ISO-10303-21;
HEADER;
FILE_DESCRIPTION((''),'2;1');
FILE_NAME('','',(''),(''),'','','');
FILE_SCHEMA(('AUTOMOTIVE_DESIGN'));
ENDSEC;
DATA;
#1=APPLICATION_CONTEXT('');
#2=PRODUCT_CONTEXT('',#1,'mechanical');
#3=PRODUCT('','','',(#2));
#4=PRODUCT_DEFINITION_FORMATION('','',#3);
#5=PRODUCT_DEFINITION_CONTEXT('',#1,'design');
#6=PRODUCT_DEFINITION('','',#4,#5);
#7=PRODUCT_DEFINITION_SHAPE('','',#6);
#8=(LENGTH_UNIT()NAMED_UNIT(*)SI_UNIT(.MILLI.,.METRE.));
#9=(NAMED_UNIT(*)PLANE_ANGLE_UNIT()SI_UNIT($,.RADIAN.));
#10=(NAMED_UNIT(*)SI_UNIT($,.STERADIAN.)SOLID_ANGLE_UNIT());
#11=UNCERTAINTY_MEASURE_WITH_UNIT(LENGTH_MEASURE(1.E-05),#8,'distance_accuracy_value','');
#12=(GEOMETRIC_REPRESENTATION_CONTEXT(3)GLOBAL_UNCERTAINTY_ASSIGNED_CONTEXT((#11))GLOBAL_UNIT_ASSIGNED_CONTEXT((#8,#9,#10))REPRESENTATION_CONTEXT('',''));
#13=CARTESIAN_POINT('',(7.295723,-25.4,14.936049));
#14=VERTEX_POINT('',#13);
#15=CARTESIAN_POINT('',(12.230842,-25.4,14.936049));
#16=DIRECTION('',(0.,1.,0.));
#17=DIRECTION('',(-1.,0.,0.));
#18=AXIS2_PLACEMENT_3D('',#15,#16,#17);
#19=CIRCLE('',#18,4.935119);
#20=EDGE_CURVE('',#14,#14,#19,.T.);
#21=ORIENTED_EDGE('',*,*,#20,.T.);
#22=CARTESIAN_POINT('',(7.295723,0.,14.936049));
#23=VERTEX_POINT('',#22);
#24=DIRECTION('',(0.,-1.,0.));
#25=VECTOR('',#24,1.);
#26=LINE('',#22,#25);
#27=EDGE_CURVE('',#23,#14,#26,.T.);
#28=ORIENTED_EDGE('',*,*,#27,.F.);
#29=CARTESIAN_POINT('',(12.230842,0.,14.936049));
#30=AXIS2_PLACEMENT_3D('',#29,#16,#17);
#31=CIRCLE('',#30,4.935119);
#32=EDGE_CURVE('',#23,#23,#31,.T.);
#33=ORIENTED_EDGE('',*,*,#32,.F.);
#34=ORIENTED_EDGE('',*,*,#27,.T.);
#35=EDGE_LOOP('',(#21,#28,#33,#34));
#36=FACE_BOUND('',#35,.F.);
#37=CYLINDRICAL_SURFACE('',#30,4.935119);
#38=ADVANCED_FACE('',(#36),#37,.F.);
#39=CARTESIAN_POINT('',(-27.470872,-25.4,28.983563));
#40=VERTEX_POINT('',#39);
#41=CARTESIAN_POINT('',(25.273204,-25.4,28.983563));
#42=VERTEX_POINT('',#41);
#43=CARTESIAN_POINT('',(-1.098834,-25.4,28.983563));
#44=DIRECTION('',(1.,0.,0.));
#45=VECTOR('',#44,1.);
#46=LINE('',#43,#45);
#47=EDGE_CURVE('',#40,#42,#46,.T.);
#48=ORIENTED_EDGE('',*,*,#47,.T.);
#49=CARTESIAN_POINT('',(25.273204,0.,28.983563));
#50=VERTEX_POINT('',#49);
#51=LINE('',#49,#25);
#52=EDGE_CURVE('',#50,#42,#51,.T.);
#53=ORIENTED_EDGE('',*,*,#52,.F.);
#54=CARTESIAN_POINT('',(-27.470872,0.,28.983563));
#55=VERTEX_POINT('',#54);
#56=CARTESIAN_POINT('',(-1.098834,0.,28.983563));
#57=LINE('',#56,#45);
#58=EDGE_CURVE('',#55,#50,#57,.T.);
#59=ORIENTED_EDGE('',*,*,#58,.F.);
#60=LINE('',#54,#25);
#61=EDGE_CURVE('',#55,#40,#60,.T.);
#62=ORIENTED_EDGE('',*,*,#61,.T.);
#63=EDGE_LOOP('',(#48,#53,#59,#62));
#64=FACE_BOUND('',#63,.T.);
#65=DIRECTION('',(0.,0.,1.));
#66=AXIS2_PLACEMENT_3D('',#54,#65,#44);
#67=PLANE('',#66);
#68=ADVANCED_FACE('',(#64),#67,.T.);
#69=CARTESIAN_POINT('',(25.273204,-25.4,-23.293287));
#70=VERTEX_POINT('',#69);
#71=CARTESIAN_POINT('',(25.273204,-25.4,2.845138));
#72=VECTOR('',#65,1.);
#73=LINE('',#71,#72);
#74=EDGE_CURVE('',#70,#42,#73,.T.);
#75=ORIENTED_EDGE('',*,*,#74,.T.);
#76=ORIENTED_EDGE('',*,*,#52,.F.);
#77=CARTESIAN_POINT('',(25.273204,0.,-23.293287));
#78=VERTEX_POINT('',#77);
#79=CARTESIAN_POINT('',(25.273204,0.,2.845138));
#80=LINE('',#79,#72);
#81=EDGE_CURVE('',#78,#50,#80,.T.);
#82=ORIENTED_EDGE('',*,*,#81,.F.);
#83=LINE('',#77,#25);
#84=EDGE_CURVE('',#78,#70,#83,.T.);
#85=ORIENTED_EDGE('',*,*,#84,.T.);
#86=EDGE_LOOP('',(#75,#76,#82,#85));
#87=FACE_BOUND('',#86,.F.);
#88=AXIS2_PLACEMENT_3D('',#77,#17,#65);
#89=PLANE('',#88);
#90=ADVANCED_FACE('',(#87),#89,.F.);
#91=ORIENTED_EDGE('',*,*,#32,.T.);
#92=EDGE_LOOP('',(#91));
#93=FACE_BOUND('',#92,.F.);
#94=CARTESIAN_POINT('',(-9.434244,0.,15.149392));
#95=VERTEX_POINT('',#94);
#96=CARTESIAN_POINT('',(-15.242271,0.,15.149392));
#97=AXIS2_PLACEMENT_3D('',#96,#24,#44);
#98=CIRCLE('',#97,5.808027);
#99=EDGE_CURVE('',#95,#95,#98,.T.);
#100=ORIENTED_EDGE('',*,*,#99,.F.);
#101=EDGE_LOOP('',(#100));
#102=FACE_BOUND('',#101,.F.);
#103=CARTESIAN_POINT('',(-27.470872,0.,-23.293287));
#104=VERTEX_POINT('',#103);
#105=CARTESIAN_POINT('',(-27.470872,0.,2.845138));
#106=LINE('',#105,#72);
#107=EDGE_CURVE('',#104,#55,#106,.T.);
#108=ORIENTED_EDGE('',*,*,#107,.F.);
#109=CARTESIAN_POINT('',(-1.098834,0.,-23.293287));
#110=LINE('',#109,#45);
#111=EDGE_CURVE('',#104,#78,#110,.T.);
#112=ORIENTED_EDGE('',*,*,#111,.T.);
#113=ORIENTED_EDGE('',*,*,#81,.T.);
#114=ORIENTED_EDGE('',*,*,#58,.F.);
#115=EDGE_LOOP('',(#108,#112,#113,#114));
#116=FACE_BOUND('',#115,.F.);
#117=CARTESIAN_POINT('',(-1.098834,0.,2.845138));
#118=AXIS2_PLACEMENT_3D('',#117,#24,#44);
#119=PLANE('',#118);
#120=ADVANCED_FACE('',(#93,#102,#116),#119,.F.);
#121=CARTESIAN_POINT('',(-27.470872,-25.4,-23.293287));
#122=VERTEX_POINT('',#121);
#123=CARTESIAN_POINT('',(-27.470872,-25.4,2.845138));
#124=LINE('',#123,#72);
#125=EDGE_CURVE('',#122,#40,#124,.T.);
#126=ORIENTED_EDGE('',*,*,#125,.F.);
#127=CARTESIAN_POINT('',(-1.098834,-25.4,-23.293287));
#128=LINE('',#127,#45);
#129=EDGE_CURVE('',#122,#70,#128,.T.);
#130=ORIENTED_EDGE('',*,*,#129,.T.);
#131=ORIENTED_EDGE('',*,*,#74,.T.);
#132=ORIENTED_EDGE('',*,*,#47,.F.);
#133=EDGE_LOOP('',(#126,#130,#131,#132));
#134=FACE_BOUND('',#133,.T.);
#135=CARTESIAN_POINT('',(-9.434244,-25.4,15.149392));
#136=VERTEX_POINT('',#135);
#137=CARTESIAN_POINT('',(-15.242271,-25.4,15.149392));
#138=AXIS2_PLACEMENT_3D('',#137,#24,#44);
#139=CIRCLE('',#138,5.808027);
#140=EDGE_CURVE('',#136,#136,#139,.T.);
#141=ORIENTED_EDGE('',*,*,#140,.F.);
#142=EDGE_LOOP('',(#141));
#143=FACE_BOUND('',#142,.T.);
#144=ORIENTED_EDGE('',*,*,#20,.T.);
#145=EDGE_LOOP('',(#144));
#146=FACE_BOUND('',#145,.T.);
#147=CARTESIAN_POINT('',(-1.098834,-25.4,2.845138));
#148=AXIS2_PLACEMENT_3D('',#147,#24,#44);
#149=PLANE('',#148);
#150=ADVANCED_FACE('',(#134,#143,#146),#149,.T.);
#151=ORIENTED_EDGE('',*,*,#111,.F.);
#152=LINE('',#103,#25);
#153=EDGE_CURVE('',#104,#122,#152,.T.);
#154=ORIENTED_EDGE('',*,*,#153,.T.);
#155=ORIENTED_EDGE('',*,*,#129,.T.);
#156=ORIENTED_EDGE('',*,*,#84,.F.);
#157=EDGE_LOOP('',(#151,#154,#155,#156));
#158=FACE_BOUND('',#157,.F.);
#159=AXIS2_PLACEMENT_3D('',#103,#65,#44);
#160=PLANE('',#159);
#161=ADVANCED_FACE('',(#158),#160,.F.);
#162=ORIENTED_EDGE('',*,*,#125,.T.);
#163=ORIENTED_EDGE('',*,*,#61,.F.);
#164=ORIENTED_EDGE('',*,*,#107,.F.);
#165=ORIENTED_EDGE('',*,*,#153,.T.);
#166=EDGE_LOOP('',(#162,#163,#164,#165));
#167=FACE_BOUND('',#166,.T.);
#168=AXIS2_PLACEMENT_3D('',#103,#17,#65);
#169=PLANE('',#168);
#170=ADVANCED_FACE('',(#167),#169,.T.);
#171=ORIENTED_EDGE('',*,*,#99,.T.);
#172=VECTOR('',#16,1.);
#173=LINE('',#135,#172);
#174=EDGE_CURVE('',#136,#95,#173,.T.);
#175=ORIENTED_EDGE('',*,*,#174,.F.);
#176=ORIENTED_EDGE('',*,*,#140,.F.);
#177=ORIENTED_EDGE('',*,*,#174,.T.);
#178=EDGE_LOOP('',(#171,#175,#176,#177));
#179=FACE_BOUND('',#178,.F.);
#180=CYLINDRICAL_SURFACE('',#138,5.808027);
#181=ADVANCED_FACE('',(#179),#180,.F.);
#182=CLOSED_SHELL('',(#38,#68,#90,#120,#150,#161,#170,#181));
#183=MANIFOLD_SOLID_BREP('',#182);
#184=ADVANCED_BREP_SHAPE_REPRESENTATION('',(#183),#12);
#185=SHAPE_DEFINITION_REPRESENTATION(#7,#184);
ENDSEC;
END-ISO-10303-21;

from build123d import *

# Parameters (mm, degrees)
F0_W     = 52.7440756559
F0_H     = 52.2768497467
F1_DEPTH = 25.4
F2_R     = 4.8102139617
F3_DEPTH = 126.0972395539
F4_R     = 4.9351190146
F5_DEPTH = 76.2
F6_R     = 5.8080274439
F8_DEPTH = 25.4


# Not quite as in the source:
# - the program builds the solid bodies; features that only make, move or delete a surface that nothing else refers to are left out


with BuildPart() as f1:
    # F0 (on Front) → F1 (new body)
    with BuildSketch(Plane.XZ):
        with Locations((-1.0988339782, 2.8451383114)):
            Rectangle(F0_W, F0_H)
    extrude(amount=F1_DEPTH)

    # F2 (on Front) → F3 (cut)
    with BuildSketch(Plane.XZ):
        with Locations((-12.8197297454, 11.39511168)):
            Circle(F2_R)
    extrude(amount=-F3_DEPTH, mode=Mode.SUBTRACT)

    # F4 (on face) → F5 (cut)
    with BuildSketch(Plane(origin=(0, 0, 0), x_dir=(-1, 0, 0), z_dir=(0, 1, 0))):
        with Locations((-12.2308423743, 14.9360494688)):
            Circle(F4_R)
    extrude(amount=-F5_DEPTH, mode=Mode.SUBTRACT)

    # F6 (on face) → F8 (cut)
    with BuildSketch(Plane.XZ.offset(25.4)):
        with Locations((-15.2422711253, 15.1493921876)):
            Circle(F6_R)
    extrude(amount=-F8_DEPTH, mode=Mode.SUBTRACT)


solid = f1.part
